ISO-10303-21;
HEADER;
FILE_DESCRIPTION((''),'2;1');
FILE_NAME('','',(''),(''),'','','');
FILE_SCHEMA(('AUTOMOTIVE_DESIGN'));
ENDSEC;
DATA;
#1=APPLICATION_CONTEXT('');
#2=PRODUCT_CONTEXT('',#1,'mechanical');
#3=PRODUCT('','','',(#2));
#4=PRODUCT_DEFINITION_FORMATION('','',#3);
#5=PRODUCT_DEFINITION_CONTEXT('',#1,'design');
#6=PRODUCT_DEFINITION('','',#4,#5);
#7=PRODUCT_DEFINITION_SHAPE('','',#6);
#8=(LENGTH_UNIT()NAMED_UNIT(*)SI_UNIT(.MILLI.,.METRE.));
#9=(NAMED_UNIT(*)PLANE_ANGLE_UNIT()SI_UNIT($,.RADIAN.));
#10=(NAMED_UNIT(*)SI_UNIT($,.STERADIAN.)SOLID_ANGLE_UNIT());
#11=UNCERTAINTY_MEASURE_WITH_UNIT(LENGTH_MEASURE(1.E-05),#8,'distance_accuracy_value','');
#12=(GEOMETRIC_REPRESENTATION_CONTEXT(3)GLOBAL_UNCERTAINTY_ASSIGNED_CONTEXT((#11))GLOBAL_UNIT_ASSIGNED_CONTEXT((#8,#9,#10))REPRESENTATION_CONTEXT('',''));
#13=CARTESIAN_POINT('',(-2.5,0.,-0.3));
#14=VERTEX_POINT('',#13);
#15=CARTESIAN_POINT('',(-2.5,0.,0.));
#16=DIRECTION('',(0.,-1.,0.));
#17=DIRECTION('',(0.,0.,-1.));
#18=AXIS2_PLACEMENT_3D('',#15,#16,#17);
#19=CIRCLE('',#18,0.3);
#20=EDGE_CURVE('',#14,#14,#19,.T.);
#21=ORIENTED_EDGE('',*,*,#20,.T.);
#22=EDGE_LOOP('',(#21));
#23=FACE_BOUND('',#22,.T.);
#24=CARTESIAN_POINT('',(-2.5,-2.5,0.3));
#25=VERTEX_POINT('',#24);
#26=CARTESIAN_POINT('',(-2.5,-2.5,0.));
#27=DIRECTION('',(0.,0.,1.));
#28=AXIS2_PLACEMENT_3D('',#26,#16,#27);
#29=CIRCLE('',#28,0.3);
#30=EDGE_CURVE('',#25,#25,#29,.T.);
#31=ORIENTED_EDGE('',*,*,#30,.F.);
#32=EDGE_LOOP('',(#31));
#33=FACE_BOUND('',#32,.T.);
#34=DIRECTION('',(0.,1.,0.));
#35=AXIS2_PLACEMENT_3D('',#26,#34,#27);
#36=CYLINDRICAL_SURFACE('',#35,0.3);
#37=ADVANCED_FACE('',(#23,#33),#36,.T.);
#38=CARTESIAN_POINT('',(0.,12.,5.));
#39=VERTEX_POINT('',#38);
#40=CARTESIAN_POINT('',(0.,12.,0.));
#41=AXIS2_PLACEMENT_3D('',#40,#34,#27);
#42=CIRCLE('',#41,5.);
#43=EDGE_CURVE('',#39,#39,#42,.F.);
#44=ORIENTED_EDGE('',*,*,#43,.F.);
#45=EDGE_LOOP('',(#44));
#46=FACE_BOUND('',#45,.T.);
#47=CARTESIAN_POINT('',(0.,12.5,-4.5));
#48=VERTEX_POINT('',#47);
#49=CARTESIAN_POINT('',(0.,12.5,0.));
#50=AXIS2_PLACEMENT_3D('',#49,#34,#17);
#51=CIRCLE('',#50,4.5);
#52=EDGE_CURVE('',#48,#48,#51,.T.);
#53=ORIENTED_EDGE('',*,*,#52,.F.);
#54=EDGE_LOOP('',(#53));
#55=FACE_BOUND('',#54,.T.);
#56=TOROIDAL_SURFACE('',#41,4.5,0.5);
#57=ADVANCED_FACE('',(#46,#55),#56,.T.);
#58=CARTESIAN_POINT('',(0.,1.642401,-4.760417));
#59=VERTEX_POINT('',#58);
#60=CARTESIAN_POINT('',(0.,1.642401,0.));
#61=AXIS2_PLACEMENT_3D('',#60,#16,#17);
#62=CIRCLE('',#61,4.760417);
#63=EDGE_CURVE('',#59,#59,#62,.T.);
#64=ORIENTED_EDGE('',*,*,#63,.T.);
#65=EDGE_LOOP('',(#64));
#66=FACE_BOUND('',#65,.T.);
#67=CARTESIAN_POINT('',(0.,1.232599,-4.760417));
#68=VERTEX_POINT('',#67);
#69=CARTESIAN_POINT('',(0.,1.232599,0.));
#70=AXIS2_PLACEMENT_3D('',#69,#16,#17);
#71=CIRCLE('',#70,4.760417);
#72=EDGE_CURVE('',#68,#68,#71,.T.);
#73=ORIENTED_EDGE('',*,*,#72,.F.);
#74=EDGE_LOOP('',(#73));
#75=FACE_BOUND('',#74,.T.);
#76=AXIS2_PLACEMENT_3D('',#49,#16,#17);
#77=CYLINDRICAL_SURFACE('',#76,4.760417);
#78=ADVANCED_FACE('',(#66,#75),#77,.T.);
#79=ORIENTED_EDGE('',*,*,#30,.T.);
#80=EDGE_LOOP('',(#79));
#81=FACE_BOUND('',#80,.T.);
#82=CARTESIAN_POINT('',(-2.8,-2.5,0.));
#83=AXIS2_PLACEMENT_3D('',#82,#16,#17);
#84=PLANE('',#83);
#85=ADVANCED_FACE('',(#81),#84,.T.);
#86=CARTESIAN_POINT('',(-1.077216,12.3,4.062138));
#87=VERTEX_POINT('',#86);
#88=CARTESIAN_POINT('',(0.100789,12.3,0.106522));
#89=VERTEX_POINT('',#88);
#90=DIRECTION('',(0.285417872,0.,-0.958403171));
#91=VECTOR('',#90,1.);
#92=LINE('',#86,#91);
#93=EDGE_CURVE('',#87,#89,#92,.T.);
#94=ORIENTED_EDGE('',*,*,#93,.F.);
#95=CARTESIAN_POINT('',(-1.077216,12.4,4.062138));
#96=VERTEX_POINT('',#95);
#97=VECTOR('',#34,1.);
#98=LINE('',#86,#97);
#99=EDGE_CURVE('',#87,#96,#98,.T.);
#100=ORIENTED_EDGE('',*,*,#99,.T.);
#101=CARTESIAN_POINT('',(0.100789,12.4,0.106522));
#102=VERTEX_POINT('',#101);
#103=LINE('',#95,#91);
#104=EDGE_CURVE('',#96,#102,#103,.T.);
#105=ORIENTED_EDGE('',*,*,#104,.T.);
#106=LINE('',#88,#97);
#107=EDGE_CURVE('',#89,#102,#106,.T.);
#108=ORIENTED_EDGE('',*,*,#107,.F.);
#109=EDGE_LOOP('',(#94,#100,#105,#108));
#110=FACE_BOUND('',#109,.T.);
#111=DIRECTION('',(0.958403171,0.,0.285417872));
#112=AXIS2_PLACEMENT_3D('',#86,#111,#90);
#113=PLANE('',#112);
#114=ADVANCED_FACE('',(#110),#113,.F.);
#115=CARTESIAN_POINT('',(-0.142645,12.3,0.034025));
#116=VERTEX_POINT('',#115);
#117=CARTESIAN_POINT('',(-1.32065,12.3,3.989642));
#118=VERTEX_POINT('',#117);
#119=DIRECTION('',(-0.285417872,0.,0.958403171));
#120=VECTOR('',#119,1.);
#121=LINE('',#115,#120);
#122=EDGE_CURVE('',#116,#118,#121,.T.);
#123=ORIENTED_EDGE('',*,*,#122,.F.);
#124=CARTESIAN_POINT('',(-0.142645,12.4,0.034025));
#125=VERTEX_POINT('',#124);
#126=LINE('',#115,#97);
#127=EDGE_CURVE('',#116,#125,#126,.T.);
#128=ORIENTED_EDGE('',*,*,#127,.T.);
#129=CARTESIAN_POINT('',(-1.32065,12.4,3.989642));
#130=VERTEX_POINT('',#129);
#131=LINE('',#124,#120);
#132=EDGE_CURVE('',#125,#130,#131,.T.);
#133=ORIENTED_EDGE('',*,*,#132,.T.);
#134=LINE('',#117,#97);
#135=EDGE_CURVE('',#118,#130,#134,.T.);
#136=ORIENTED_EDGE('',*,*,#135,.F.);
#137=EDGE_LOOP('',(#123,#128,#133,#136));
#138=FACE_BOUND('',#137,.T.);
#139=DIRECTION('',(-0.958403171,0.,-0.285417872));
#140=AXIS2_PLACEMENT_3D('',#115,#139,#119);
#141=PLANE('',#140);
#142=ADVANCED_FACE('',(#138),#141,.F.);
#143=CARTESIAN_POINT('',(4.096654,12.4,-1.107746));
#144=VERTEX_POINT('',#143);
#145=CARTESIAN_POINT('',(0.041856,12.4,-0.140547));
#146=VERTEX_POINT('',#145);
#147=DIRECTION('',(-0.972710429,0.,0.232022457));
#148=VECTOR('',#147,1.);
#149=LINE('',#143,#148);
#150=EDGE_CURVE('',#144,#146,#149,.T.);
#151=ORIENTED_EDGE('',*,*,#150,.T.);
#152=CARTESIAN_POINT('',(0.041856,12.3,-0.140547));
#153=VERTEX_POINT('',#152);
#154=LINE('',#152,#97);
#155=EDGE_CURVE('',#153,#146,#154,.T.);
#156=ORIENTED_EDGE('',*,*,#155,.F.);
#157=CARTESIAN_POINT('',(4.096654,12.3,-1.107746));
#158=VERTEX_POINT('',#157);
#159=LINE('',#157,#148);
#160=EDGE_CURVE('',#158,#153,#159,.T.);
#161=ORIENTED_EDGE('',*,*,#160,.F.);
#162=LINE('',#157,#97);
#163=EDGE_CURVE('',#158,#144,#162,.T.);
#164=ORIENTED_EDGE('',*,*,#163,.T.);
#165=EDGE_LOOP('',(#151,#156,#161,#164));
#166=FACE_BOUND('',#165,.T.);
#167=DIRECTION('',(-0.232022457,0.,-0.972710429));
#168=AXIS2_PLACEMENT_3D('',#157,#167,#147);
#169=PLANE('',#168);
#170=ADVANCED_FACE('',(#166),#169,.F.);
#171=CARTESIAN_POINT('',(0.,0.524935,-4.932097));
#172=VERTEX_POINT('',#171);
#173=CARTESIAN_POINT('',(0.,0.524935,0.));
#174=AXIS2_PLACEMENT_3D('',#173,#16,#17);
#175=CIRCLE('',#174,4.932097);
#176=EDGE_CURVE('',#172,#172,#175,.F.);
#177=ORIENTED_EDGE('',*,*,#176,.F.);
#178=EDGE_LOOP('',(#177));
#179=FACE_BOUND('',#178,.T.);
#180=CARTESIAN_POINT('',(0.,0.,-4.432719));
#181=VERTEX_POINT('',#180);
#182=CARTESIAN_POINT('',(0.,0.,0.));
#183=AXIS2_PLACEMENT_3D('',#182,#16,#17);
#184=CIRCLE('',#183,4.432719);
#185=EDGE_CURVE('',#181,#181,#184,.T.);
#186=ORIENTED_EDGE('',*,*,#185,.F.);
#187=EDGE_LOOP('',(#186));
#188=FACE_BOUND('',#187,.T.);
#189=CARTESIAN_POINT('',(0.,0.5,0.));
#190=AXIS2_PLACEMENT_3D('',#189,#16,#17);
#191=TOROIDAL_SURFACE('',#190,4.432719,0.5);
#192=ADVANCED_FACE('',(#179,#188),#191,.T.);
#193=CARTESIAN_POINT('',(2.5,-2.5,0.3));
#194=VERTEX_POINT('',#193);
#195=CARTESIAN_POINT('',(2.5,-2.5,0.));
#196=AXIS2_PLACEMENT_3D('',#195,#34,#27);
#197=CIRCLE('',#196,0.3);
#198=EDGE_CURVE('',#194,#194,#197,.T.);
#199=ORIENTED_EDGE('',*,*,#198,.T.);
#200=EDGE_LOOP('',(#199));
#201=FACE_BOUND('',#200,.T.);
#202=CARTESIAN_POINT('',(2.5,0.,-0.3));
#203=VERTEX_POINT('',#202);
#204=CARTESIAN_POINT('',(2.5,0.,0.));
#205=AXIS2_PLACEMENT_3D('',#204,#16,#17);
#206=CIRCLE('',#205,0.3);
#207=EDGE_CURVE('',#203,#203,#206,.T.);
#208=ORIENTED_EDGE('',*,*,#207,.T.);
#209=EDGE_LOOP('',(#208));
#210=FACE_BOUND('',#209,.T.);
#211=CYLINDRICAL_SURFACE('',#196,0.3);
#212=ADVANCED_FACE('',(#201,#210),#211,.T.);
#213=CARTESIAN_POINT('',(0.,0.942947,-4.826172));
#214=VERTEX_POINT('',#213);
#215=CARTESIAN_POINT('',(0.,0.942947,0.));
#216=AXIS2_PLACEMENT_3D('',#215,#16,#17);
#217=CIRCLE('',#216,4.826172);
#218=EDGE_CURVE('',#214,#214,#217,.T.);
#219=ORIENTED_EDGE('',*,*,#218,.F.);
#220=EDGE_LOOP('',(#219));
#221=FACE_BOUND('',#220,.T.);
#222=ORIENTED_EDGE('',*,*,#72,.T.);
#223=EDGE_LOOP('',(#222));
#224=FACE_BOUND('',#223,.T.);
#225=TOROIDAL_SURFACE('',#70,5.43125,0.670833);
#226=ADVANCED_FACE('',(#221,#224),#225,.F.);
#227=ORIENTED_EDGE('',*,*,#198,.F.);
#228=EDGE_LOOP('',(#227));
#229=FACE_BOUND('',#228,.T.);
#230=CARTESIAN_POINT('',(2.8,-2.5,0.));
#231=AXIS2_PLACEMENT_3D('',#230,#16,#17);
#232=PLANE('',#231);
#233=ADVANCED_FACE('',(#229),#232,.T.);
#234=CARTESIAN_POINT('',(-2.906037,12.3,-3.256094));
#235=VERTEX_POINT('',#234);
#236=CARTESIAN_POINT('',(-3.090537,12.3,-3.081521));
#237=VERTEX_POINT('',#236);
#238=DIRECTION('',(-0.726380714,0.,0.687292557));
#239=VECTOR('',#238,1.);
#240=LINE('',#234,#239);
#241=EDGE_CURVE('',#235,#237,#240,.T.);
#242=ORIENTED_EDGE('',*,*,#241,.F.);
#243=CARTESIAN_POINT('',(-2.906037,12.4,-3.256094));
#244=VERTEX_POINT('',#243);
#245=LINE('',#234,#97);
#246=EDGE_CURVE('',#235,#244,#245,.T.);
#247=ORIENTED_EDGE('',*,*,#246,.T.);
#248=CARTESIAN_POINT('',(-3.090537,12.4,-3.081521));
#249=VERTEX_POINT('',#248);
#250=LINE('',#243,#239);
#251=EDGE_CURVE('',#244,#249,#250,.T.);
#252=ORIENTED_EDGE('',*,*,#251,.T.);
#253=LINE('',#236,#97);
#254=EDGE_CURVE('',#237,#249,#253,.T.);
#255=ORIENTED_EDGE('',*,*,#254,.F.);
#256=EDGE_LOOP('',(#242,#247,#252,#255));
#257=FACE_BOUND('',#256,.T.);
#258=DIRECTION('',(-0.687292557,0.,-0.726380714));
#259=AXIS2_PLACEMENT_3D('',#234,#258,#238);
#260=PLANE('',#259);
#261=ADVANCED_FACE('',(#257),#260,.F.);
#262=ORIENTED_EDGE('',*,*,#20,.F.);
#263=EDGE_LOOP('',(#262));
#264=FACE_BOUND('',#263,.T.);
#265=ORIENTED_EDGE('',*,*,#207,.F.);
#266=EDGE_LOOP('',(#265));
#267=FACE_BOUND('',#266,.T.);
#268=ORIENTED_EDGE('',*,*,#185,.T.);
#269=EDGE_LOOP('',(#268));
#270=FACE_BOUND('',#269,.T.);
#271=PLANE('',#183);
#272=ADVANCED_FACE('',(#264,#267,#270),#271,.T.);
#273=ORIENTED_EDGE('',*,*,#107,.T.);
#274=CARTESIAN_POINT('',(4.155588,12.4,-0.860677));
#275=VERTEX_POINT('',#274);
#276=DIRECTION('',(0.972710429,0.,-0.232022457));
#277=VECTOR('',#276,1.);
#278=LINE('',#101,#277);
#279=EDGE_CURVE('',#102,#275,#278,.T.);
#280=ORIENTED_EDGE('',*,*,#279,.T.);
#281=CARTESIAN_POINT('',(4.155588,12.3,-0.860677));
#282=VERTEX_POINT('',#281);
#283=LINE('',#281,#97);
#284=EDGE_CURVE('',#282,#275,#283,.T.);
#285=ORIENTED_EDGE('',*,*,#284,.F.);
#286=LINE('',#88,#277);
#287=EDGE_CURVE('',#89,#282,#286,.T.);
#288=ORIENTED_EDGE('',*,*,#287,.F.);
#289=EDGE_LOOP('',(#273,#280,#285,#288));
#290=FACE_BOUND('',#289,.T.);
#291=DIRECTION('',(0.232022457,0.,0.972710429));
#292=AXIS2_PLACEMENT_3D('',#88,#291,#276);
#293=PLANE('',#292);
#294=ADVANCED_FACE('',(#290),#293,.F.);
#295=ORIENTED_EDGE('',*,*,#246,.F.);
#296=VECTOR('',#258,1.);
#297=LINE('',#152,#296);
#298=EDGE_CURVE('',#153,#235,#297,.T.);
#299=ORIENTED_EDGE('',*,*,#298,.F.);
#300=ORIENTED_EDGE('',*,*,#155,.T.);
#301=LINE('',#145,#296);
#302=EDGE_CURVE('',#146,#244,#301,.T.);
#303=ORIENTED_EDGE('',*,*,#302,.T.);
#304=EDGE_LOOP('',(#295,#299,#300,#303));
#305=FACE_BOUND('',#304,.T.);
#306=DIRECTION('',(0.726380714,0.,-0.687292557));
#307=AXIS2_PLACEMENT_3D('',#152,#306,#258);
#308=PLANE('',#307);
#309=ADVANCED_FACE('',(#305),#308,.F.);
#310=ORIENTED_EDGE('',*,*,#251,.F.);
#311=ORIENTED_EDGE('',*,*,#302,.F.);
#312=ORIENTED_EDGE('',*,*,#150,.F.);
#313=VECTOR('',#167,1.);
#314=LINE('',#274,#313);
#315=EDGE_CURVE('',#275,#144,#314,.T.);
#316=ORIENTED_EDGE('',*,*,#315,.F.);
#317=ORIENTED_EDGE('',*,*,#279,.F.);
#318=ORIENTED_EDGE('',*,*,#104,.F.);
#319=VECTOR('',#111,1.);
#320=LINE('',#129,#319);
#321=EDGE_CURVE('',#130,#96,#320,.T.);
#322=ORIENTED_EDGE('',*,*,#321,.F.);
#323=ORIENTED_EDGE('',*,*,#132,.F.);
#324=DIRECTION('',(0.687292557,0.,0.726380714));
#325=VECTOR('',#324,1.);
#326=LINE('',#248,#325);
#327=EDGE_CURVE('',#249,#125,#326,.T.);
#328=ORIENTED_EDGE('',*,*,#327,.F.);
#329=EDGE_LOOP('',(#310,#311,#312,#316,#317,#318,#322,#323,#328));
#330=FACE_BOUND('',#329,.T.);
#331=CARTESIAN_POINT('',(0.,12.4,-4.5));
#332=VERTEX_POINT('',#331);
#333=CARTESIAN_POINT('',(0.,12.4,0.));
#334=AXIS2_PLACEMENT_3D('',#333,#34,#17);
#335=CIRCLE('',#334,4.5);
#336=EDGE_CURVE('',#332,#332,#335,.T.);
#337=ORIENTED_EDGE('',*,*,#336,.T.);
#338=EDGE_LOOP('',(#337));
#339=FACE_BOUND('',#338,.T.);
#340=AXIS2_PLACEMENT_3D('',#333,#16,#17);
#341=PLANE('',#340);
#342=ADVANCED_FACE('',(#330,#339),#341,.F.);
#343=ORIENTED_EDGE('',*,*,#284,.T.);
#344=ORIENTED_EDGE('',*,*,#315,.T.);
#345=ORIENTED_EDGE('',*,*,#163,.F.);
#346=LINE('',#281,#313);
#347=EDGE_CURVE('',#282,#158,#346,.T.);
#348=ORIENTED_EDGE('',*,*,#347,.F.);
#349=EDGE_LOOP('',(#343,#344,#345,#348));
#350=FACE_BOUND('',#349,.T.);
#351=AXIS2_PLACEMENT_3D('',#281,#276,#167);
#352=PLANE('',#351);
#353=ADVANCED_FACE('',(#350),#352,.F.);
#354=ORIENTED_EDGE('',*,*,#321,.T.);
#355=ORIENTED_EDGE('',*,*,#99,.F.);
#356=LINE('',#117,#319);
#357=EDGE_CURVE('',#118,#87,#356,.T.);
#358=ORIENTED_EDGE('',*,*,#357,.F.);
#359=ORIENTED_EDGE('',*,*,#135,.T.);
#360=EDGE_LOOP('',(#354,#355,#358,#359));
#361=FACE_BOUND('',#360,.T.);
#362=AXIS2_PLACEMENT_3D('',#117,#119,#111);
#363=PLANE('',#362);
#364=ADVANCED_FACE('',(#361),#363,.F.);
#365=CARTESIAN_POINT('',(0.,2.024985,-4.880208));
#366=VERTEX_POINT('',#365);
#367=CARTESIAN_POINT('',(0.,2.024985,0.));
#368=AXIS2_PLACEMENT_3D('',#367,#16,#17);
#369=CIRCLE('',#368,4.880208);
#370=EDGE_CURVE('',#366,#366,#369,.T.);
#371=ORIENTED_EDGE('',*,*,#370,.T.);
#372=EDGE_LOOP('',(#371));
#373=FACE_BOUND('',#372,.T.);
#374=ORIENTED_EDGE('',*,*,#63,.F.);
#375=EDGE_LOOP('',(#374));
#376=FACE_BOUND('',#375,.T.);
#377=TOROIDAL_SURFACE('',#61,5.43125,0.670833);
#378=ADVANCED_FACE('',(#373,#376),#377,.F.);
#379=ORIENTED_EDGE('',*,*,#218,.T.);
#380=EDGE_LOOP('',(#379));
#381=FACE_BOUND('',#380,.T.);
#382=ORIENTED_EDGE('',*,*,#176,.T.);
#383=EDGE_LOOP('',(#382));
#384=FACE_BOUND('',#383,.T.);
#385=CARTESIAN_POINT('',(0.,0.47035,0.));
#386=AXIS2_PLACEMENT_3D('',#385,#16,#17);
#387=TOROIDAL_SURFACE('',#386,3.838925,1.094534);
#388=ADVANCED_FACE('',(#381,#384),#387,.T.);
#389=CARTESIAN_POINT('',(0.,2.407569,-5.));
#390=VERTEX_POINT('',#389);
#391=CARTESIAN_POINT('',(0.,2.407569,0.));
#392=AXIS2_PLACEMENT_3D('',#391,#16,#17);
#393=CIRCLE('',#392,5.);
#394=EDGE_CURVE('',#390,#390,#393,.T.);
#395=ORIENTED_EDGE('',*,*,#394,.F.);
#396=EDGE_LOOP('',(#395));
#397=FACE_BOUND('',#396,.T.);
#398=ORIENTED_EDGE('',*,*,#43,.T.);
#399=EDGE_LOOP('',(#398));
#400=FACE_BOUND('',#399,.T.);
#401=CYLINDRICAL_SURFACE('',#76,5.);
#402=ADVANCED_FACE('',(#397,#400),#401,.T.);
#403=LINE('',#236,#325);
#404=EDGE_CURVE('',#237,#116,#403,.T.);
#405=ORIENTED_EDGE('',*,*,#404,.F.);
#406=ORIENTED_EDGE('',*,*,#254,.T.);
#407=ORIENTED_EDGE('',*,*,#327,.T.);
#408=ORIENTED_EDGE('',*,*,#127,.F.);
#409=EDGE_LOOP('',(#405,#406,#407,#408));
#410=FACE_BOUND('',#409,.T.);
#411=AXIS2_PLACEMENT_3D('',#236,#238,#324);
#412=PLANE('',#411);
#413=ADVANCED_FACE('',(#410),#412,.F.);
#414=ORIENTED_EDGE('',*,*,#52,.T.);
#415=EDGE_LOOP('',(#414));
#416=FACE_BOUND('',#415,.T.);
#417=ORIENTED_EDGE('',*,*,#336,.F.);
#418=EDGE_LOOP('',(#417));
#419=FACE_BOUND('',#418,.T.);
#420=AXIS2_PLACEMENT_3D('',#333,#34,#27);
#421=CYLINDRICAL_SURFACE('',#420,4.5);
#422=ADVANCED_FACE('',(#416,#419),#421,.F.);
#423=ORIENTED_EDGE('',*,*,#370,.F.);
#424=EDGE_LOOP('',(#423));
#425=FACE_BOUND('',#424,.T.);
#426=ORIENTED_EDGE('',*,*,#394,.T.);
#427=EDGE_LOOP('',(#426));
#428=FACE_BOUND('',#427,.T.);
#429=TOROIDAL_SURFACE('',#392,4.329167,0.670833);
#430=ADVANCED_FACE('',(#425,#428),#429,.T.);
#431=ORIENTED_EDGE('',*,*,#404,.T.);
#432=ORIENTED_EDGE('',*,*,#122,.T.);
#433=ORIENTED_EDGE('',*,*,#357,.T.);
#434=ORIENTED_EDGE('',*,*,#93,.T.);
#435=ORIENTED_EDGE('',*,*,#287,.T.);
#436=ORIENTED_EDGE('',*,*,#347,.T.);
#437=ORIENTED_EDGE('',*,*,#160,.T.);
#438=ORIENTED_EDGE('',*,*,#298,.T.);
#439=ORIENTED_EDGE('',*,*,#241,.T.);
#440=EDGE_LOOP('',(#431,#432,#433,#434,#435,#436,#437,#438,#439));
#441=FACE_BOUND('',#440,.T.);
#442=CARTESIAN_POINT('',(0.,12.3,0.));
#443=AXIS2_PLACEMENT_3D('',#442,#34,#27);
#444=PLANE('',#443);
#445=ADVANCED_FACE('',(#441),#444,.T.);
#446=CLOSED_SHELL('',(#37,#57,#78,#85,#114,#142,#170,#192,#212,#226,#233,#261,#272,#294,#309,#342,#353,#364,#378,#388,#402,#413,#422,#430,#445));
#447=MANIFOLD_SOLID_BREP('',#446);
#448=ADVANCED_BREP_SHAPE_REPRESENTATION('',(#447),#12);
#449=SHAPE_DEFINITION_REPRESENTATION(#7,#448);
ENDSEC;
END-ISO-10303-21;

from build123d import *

# Parameters (mm, degrees)
SKETCH2_R          = 4.5
CUT_EXTRUDE1_DEPTH = 0.1
CUT_EXTRUDE2_DEPTH = 0.1
SKETCH4_W          = 0.3
SKETCH4_H          = 2.5
FILLET1_R          = 0.5


with BuildPart() as part:
    # Sketch1 → Revolve1 (revolve)
    with BuildSketch(Plane.XY, mode=Mode.PRIVATE) as revolve1_sk:
        with BuildLine():
            Line((5, 12.5), (0, 12.5))
            Line((0, 12.5), (0, 0))
            Line((0, 0), (4.827244523, 0))
            ThreePointArc((4.827244523, 0), (4.933458385, 0.471594976), (4.82617218, 0.942947155))
            ThreePointArc((4.82617218, 0.942947155), (4.777062056, 1.084088077), (4.760416667, 1.232599004))
            Line((4.760416667, 1.232599004), (4.760416667, 1.642400996))
            ThreePointArc((4.760416667, 1.642400996), (4.791064683, 1.842850794), (4.880208333, 2.024984899))
            ThreePointArc((4.880208333, 2.024984899), (4.969351983, 2.207119004), (5, 2.407568802))
            Line((5, 2.407568802), (5, 12.5))
        make_face()
    revolve(revolve1_sk.sketch.rotate(Axis((0, 12.5, 0), (0, -1, 0)), 270), axis=Axis((0, 12.5, 0), (0, -1, 0)))

    # Sketch2 → Cut-Extrude1 (cut)
    with BuildSketch(Plane(origin=(0, 12.5, 0), x_dir=(-1, 0, 0), z_dir=(0, 1, 0))):
        with Locations(Location((0, 0, 0), (0, 0, 270))):
            Circle(SKETCH2_R)
    extrude(amount=-CUT_EXTRUDE1_DEPTH, mode=Mode.SUBTRACT)

    # Sketch3 → Cut-Extrude2 (cut)
    with BuildSketch(Plane(origin=(0, 12.4, 0), x_dir=(-1, 0, 0), z_dir=(0, 1, 0))):
        Polygon((2.906036622, -3.256093686), (3.090537324, -3.081521376), (0.142645036, 0.03402539), (1.320649975, 3.989641976), (1.07721557, 4.062138116), (-0.10078937, 0.10652153), (-4.155587963, -0.860677244), (-4.096654259, -1.107745693), (-0.041855666, -0.14054692), align=None)
    extrude(amount=-CUT_EXTRUDE2_DEPTH, mode=Mode.SUBTRACT)

    # Sketch4 → Revolve2 (revolve)
    with BuildSketch(Plane(origin=(0, 0, 0), x_dir=(-1, 0, 0), z_dir=(0, 0, -1)), mode=Mode.PRIVATE) as revolve2_sk:
        with Locations((-2.65, -1.25)):
            Rectangle(SKETCH4_W, SKETCH4_H)
    revolve2 = revolve(revolve2_sk.sketch.rotate(Axis((2.5, -2.5, 0), (0, 1, 0)), 270), axis=Axis((2.5, -2.5, 0), (0, 1, 0)))

    # Fillet1
    fillet1_edges = [part.edges().sort_by_distance(p)[0] for p in [
        (0, 12.5, 5),
        (0, 0, 4.827244523),
    ]]
    fillet(fillet1_edges, radius=FILLET1_R - 0.0001)  # a hair under: the kernel refuses the full size

    # Simetría3: Revolve2 across plane
    add(revolve2.mirror(Plane(origin=(0, 0, 0), x_dir=(0, 0, 1), z_dir=(1, 0, 0))))


solid = part.part
